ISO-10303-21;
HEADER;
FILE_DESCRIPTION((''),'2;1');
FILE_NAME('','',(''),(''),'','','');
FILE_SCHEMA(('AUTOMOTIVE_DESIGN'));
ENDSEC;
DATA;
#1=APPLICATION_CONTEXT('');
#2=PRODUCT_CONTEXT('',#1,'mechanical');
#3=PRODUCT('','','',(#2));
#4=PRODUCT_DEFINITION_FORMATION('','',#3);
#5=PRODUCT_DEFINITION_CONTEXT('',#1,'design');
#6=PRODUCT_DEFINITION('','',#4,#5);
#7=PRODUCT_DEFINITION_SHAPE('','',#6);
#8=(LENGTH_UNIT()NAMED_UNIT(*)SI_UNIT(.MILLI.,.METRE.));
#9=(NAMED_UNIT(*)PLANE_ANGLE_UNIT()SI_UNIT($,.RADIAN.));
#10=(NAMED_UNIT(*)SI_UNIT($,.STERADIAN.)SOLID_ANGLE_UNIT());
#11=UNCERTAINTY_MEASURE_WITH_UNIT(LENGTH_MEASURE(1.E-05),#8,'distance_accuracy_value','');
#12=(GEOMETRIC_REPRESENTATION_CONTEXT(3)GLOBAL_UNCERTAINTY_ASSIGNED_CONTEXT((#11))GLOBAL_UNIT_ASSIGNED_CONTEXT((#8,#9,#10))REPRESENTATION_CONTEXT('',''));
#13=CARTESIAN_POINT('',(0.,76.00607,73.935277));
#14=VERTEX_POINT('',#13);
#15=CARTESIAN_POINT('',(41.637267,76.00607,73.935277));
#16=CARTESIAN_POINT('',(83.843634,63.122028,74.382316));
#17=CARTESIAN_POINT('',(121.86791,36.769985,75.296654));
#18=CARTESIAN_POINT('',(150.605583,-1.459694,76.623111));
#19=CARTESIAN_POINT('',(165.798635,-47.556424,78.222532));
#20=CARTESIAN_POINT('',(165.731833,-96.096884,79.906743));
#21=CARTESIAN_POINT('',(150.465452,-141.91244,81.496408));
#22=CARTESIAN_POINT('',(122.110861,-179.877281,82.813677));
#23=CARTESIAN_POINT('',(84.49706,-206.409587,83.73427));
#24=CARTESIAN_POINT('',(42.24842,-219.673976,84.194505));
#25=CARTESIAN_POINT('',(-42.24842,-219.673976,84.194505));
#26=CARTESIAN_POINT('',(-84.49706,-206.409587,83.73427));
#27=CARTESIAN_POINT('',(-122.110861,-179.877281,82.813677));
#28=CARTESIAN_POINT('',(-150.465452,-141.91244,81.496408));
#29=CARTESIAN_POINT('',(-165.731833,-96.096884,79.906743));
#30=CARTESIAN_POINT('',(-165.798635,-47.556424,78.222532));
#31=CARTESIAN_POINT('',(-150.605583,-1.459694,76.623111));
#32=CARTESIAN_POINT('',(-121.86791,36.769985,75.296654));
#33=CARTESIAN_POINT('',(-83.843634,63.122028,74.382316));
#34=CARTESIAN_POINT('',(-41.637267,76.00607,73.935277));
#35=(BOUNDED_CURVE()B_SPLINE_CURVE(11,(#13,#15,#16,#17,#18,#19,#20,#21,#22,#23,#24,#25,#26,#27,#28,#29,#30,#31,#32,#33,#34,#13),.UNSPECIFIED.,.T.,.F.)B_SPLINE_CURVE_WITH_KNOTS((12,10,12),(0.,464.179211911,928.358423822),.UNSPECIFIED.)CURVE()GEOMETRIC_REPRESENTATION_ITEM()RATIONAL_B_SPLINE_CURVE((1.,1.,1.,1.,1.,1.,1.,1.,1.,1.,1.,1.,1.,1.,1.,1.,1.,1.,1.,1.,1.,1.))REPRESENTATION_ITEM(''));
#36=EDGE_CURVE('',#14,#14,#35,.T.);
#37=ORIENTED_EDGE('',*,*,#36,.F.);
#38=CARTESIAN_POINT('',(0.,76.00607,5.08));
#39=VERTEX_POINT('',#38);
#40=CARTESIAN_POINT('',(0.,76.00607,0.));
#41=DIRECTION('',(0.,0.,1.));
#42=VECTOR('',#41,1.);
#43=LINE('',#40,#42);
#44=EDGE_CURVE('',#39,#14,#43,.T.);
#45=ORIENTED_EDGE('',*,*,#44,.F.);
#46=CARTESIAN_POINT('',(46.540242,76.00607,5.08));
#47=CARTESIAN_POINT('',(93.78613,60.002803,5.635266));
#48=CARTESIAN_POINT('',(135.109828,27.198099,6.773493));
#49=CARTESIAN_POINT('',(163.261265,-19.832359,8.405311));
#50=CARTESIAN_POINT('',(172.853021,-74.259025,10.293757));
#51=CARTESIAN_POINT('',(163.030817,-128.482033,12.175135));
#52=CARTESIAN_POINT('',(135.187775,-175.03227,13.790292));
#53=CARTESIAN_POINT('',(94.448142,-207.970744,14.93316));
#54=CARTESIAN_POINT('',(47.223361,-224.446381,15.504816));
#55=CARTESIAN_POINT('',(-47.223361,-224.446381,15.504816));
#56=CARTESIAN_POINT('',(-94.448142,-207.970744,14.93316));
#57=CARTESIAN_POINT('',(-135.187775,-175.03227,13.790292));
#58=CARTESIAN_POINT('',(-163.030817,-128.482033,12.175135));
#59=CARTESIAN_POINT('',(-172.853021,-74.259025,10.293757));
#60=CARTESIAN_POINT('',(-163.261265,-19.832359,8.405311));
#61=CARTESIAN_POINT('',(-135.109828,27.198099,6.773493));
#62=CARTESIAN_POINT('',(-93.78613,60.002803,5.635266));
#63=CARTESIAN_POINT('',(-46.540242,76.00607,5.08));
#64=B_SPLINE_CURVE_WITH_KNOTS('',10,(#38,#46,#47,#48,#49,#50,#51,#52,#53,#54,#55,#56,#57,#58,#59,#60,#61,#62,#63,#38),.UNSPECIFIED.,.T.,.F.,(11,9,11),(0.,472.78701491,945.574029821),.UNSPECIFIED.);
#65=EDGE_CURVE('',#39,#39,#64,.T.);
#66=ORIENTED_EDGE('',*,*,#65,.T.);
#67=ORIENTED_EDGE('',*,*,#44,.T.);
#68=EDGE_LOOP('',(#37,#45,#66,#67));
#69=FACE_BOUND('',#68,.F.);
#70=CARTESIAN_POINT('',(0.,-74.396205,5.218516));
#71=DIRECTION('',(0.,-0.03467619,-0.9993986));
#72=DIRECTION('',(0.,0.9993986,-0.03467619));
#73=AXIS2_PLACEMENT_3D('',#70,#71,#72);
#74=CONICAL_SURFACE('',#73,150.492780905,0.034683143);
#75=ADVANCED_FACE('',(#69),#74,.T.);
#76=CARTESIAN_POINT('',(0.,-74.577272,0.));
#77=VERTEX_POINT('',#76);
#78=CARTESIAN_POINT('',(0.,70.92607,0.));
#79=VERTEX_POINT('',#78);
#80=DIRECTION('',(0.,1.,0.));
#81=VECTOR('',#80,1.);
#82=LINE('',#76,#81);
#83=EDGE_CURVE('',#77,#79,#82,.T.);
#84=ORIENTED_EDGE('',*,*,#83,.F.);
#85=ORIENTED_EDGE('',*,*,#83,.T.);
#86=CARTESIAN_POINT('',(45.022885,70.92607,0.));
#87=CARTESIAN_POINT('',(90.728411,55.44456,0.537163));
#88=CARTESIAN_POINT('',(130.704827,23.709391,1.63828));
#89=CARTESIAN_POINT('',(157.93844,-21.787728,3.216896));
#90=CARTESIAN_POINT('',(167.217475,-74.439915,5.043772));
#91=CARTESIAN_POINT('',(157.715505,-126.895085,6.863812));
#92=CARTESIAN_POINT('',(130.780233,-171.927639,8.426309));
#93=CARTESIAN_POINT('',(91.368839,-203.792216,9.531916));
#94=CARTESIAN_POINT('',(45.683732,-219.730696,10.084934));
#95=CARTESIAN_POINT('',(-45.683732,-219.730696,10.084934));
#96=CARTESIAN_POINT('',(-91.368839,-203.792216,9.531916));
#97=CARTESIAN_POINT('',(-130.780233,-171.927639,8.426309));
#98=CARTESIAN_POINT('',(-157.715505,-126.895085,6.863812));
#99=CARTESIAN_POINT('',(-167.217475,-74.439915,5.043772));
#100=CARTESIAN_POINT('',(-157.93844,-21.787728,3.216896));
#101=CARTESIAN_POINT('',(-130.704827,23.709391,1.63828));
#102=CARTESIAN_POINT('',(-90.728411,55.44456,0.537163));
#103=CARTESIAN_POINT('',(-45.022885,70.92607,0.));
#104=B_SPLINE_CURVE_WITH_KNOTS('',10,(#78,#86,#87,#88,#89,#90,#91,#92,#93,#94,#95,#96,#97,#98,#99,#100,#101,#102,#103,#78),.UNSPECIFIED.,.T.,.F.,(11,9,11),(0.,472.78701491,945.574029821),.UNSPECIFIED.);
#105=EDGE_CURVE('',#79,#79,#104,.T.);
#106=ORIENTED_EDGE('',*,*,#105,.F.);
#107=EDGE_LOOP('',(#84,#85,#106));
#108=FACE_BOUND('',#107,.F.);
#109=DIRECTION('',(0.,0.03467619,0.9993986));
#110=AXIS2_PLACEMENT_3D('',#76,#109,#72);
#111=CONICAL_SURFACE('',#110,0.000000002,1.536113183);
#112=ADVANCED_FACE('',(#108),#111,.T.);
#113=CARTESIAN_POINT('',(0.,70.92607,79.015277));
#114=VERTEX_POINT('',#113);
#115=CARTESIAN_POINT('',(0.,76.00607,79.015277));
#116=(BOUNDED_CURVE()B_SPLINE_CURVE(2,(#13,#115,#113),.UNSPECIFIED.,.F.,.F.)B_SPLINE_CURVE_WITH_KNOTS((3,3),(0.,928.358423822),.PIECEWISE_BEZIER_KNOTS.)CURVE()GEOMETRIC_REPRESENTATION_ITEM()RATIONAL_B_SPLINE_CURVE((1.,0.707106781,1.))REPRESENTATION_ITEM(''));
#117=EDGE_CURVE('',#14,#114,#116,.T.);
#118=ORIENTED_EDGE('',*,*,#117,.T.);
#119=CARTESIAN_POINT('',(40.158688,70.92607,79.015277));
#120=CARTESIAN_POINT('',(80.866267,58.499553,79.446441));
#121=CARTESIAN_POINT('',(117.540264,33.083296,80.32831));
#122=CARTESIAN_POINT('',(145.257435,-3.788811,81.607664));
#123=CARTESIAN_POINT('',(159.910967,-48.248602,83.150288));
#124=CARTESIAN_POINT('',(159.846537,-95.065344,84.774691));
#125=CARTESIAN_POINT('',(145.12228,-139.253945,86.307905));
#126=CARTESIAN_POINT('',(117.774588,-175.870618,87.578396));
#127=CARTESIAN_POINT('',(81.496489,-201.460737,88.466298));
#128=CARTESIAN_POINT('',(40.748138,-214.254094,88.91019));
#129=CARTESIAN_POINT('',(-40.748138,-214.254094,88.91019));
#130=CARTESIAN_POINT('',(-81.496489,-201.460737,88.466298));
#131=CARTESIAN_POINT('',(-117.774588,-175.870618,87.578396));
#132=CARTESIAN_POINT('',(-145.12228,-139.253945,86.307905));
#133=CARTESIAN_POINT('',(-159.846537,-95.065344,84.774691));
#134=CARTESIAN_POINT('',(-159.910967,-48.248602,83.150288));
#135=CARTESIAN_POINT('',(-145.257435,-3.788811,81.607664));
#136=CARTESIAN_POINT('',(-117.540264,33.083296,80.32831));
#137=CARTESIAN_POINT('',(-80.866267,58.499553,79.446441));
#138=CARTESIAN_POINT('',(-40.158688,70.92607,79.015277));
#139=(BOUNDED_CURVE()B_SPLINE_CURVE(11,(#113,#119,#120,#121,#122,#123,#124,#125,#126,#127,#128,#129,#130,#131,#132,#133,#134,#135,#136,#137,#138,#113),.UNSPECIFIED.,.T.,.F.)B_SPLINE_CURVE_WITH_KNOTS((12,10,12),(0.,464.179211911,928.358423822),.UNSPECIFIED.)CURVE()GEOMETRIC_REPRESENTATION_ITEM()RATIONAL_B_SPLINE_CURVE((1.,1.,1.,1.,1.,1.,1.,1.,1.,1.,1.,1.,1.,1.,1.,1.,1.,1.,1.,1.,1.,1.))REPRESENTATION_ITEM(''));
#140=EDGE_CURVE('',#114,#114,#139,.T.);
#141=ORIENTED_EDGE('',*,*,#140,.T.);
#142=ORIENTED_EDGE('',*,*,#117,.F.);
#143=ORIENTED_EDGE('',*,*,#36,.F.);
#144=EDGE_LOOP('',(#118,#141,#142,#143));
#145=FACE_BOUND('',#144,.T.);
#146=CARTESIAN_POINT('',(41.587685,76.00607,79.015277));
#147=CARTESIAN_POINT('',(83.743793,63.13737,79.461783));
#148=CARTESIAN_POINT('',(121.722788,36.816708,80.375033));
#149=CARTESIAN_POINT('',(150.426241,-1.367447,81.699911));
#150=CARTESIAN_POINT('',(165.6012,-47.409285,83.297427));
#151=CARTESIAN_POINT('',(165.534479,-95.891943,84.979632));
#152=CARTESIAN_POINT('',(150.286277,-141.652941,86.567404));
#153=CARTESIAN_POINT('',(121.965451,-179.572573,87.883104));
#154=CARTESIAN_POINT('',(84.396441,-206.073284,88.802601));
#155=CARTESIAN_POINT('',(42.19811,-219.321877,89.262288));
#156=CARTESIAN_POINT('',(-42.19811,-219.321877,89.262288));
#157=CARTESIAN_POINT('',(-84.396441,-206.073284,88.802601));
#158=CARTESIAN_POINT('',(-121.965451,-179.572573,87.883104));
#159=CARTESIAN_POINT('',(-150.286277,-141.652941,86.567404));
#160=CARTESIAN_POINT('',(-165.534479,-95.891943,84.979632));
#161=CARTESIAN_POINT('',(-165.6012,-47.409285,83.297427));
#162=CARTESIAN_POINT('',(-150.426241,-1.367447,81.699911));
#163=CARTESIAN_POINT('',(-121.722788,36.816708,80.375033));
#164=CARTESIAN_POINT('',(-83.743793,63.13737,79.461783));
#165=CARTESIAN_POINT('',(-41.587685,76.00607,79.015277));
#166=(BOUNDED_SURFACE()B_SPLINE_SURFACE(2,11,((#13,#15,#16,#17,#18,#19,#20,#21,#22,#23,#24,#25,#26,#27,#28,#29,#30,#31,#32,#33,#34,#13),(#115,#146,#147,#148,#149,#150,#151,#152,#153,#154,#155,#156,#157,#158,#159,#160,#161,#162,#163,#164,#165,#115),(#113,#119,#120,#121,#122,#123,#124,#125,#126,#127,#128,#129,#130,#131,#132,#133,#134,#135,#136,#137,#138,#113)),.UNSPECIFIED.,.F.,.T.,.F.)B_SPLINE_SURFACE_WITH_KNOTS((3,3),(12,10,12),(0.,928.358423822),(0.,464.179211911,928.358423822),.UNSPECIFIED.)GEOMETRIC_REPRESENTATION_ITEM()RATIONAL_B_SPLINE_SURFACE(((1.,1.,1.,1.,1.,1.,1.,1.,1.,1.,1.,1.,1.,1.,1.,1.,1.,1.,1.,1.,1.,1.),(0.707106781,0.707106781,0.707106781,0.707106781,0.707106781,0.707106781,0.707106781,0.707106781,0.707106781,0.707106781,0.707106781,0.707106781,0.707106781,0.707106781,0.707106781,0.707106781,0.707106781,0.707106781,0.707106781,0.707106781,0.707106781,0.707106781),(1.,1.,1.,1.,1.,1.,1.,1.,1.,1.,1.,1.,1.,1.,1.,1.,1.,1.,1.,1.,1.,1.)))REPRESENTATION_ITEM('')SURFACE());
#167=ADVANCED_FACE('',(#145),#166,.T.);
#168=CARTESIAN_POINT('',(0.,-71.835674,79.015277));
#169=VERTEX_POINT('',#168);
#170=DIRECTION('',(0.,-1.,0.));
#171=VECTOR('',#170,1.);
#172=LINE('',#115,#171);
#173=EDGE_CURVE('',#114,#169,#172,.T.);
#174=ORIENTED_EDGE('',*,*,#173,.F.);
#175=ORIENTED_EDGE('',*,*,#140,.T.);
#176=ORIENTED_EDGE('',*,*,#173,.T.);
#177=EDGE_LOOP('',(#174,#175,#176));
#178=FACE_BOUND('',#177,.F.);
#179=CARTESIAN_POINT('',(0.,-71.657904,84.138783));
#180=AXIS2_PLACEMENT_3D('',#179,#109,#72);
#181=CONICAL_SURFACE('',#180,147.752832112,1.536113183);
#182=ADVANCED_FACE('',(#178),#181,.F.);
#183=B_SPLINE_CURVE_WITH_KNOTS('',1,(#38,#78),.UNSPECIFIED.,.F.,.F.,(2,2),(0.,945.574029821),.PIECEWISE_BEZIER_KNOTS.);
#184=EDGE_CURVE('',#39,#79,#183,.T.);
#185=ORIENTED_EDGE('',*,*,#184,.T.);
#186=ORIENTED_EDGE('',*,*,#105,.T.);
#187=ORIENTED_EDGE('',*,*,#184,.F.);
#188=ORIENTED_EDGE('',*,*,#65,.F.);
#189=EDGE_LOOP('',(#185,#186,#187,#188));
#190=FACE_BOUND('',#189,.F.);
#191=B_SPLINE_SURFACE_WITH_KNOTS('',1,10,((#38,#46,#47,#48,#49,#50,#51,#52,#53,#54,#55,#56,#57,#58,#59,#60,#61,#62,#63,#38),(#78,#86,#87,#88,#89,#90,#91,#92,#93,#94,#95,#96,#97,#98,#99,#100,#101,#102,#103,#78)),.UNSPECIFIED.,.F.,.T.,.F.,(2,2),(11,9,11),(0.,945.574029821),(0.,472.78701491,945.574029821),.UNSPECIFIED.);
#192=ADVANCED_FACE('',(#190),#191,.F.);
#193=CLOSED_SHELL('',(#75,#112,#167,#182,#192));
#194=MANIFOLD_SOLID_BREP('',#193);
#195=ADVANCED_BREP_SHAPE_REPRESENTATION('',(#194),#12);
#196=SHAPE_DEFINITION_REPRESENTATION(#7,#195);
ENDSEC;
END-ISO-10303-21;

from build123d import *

# Parameters (mm, degrees)
F2_R    = 5.08
F3_SIZE = 5.08


with BuildPart() as f1:
    # F0 (on Right) → F1 (revolve)
    with BuildSketch(Plane.YZ):
        Polygon((-71.8356743455, 79.0152773261), (-74.5772719383, 0), (76.0060697794, 0), (76.0060697794, 79.0152773261), align=None)
    revolve(axis=Axis((0, -73.2064731419, 39.5076386631), (0, -0.0346761903, -0.9993986001)))

    # F2
    f2_edges = [f1.edges().sort_by_distance(p)[0] for p in [
        (0, -219.321877, 89.262288),
    ]]
    fillet(f2_edges, radius=F2_R)

    # F3
    f3_edges = [f1.edges().sort_by_distance(p)[0] for p in [
        (0, -224.798479, 10.437033),
    ]]
    chamfer(f3_edges, length=F3_SIZE)


solid = f1.part
